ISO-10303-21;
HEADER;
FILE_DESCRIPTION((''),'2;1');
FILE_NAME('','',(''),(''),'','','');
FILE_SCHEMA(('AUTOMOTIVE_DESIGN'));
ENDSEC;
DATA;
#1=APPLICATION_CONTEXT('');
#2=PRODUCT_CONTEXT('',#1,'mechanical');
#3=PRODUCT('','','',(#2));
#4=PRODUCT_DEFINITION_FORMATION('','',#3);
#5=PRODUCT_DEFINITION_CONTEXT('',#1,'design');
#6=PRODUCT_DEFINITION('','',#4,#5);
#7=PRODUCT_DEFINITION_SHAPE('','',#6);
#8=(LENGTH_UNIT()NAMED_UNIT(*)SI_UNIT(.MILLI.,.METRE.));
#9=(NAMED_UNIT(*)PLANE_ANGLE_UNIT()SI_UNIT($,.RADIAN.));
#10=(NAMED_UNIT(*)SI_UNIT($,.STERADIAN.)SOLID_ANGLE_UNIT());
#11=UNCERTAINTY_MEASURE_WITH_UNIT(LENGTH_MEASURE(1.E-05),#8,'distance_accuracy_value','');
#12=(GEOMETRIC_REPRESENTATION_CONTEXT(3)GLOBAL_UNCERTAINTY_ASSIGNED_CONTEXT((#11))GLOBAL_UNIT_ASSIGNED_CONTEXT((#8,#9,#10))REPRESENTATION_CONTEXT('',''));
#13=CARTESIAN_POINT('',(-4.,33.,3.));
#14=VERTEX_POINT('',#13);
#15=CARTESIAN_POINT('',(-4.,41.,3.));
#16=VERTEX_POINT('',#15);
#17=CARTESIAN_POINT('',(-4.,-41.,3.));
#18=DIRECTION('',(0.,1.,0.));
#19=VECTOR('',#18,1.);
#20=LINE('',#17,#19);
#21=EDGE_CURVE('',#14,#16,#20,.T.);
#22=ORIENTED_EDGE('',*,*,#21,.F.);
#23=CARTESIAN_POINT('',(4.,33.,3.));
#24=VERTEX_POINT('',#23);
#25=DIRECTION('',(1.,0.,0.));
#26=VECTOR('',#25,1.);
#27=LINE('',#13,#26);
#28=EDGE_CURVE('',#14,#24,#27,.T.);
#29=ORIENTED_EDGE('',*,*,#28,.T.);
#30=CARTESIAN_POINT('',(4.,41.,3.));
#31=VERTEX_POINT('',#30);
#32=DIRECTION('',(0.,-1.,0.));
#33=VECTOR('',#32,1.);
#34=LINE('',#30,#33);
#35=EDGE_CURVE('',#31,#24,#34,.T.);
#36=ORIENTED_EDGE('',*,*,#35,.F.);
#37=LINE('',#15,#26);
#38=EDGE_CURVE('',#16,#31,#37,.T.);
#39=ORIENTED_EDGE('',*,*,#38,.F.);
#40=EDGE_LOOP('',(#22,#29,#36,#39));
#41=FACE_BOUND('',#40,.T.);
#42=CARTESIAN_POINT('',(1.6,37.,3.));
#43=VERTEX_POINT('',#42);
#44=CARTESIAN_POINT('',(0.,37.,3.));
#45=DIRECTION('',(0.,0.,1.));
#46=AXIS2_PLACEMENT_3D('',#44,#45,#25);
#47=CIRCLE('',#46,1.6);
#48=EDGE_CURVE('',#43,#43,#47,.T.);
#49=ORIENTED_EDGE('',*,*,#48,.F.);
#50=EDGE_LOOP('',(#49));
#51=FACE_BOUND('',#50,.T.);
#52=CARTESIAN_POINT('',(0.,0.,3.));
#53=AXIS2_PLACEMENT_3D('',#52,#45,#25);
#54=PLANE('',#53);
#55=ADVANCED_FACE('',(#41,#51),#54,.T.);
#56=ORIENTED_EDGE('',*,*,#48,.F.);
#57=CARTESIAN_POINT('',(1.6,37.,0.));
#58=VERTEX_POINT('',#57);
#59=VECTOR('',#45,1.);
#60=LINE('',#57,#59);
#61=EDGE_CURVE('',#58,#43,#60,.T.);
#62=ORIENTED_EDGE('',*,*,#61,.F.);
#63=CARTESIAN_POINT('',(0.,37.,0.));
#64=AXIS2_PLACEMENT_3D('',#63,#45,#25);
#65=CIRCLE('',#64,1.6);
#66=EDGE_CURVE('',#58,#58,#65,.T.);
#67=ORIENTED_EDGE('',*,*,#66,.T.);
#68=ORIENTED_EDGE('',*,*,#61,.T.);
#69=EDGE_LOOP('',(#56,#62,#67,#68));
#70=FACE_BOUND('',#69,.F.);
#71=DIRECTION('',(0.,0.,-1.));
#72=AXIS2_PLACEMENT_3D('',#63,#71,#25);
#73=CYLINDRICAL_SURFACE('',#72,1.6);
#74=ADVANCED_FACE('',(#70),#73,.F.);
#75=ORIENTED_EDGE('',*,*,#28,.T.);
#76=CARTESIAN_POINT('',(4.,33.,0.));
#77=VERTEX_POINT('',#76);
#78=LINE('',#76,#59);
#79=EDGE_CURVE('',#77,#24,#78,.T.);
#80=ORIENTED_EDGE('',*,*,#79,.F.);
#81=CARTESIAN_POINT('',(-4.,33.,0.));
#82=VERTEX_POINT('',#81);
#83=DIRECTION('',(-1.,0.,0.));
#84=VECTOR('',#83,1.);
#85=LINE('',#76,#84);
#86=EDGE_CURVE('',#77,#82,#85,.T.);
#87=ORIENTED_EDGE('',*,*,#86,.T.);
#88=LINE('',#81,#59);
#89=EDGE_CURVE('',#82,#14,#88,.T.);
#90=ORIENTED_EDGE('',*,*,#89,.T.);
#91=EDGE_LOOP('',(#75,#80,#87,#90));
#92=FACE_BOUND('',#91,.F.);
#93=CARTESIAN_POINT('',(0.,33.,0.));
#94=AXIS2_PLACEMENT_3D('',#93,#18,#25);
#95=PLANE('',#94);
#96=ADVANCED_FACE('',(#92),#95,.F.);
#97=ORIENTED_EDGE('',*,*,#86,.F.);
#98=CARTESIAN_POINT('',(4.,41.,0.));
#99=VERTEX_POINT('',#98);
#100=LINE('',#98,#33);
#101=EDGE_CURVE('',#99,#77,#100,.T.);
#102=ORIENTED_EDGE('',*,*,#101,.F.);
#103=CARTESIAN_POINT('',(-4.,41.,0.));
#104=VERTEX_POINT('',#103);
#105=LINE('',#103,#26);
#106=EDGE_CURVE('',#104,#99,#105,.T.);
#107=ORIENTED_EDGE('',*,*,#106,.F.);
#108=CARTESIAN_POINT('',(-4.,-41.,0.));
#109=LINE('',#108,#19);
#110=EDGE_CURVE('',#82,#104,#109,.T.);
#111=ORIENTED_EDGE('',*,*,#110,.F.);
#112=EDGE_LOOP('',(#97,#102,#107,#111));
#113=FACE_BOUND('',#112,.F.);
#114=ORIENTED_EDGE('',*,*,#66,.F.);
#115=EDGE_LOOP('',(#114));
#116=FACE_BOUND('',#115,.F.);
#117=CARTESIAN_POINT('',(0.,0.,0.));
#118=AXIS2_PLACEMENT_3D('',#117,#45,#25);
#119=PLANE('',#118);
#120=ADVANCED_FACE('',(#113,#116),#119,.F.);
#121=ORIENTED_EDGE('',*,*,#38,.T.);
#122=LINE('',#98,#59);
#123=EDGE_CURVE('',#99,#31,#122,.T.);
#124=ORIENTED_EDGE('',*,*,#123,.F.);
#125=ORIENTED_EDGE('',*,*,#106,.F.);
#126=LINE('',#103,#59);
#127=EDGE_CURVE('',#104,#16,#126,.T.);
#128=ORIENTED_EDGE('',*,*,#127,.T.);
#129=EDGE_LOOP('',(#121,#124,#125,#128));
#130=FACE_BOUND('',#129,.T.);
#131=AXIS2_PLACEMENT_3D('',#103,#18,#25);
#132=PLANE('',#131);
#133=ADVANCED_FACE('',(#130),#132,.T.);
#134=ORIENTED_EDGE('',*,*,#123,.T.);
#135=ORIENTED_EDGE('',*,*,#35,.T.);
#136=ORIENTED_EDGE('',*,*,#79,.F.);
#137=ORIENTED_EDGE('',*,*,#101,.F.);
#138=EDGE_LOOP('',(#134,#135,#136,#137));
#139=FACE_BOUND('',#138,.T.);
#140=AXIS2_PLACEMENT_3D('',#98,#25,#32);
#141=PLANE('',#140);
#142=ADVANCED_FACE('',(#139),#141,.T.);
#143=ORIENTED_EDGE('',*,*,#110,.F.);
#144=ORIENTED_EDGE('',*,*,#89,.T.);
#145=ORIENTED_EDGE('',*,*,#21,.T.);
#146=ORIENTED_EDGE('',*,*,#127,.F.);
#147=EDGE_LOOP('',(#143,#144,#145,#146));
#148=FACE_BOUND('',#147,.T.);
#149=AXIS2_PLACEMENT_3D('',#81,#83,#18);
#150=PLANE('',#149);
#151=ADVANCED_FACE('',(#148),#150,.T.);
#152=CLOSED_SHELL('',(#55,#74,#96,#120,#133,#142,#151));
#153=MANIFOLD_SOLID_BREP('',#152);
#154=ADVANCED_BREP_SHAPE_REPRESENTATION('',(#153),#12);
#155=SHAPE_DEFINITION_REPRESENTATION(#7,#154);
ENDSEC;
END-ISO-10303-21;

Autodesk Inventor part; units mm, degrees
ref_plane "YZ Plane" through (0, 0, 0) normal (1, 0, 0) x (0, 1, 0)
ref_plane "XZ Plane" through (0, 0, 0) normal (0, 1, 0) x (-1, 0, 0)
sketch "Boceto1" plane through (0, 0, 0) normal (0, 0, 1) x (1, 0, 0)
  circle A0 centre (0, 37) radius 2.1
  circle A1 centre (0, -37) radius 2.1
  line L0 (4, 41) -> (4, -41)
  line L1 (-4, 41) -> (4, 41)
  line L2 (-4, -41) -> (-4, 41)
  line L3 (4, -41) -> (-4, -41)
  line L4 (4, 41) -> (-4, 41)
  line L5 (-4, 41) -> (-4, 33)
  line L6 (-4, 33) -> (4, 33)
  line L7 (4, 33) -> (4, 41)
  circle A2 centre (0, 37) radius 1.6
  line L8 (0, 0) -> (0, 33)
  line L9 (4, 33) -> (-4, 33)
  line L10 (-4, 33) -> (-4, 23)
  line L11 (-4, 23) -> (4, 23)
  line L12 (4, 23) -> (4, 33)
  dimension "d2" = 3.2
ref_plane "Plano de trabajo1" through (-9.1, 23, 5.1) normal (0, 0, 1) x (1, 0, 0)
extrude "Extrusión1" add sketch "Boceto1" along normal blind 3 contours A0 | L0 L6 L2 L1
properties part number "Soporte gomas"
